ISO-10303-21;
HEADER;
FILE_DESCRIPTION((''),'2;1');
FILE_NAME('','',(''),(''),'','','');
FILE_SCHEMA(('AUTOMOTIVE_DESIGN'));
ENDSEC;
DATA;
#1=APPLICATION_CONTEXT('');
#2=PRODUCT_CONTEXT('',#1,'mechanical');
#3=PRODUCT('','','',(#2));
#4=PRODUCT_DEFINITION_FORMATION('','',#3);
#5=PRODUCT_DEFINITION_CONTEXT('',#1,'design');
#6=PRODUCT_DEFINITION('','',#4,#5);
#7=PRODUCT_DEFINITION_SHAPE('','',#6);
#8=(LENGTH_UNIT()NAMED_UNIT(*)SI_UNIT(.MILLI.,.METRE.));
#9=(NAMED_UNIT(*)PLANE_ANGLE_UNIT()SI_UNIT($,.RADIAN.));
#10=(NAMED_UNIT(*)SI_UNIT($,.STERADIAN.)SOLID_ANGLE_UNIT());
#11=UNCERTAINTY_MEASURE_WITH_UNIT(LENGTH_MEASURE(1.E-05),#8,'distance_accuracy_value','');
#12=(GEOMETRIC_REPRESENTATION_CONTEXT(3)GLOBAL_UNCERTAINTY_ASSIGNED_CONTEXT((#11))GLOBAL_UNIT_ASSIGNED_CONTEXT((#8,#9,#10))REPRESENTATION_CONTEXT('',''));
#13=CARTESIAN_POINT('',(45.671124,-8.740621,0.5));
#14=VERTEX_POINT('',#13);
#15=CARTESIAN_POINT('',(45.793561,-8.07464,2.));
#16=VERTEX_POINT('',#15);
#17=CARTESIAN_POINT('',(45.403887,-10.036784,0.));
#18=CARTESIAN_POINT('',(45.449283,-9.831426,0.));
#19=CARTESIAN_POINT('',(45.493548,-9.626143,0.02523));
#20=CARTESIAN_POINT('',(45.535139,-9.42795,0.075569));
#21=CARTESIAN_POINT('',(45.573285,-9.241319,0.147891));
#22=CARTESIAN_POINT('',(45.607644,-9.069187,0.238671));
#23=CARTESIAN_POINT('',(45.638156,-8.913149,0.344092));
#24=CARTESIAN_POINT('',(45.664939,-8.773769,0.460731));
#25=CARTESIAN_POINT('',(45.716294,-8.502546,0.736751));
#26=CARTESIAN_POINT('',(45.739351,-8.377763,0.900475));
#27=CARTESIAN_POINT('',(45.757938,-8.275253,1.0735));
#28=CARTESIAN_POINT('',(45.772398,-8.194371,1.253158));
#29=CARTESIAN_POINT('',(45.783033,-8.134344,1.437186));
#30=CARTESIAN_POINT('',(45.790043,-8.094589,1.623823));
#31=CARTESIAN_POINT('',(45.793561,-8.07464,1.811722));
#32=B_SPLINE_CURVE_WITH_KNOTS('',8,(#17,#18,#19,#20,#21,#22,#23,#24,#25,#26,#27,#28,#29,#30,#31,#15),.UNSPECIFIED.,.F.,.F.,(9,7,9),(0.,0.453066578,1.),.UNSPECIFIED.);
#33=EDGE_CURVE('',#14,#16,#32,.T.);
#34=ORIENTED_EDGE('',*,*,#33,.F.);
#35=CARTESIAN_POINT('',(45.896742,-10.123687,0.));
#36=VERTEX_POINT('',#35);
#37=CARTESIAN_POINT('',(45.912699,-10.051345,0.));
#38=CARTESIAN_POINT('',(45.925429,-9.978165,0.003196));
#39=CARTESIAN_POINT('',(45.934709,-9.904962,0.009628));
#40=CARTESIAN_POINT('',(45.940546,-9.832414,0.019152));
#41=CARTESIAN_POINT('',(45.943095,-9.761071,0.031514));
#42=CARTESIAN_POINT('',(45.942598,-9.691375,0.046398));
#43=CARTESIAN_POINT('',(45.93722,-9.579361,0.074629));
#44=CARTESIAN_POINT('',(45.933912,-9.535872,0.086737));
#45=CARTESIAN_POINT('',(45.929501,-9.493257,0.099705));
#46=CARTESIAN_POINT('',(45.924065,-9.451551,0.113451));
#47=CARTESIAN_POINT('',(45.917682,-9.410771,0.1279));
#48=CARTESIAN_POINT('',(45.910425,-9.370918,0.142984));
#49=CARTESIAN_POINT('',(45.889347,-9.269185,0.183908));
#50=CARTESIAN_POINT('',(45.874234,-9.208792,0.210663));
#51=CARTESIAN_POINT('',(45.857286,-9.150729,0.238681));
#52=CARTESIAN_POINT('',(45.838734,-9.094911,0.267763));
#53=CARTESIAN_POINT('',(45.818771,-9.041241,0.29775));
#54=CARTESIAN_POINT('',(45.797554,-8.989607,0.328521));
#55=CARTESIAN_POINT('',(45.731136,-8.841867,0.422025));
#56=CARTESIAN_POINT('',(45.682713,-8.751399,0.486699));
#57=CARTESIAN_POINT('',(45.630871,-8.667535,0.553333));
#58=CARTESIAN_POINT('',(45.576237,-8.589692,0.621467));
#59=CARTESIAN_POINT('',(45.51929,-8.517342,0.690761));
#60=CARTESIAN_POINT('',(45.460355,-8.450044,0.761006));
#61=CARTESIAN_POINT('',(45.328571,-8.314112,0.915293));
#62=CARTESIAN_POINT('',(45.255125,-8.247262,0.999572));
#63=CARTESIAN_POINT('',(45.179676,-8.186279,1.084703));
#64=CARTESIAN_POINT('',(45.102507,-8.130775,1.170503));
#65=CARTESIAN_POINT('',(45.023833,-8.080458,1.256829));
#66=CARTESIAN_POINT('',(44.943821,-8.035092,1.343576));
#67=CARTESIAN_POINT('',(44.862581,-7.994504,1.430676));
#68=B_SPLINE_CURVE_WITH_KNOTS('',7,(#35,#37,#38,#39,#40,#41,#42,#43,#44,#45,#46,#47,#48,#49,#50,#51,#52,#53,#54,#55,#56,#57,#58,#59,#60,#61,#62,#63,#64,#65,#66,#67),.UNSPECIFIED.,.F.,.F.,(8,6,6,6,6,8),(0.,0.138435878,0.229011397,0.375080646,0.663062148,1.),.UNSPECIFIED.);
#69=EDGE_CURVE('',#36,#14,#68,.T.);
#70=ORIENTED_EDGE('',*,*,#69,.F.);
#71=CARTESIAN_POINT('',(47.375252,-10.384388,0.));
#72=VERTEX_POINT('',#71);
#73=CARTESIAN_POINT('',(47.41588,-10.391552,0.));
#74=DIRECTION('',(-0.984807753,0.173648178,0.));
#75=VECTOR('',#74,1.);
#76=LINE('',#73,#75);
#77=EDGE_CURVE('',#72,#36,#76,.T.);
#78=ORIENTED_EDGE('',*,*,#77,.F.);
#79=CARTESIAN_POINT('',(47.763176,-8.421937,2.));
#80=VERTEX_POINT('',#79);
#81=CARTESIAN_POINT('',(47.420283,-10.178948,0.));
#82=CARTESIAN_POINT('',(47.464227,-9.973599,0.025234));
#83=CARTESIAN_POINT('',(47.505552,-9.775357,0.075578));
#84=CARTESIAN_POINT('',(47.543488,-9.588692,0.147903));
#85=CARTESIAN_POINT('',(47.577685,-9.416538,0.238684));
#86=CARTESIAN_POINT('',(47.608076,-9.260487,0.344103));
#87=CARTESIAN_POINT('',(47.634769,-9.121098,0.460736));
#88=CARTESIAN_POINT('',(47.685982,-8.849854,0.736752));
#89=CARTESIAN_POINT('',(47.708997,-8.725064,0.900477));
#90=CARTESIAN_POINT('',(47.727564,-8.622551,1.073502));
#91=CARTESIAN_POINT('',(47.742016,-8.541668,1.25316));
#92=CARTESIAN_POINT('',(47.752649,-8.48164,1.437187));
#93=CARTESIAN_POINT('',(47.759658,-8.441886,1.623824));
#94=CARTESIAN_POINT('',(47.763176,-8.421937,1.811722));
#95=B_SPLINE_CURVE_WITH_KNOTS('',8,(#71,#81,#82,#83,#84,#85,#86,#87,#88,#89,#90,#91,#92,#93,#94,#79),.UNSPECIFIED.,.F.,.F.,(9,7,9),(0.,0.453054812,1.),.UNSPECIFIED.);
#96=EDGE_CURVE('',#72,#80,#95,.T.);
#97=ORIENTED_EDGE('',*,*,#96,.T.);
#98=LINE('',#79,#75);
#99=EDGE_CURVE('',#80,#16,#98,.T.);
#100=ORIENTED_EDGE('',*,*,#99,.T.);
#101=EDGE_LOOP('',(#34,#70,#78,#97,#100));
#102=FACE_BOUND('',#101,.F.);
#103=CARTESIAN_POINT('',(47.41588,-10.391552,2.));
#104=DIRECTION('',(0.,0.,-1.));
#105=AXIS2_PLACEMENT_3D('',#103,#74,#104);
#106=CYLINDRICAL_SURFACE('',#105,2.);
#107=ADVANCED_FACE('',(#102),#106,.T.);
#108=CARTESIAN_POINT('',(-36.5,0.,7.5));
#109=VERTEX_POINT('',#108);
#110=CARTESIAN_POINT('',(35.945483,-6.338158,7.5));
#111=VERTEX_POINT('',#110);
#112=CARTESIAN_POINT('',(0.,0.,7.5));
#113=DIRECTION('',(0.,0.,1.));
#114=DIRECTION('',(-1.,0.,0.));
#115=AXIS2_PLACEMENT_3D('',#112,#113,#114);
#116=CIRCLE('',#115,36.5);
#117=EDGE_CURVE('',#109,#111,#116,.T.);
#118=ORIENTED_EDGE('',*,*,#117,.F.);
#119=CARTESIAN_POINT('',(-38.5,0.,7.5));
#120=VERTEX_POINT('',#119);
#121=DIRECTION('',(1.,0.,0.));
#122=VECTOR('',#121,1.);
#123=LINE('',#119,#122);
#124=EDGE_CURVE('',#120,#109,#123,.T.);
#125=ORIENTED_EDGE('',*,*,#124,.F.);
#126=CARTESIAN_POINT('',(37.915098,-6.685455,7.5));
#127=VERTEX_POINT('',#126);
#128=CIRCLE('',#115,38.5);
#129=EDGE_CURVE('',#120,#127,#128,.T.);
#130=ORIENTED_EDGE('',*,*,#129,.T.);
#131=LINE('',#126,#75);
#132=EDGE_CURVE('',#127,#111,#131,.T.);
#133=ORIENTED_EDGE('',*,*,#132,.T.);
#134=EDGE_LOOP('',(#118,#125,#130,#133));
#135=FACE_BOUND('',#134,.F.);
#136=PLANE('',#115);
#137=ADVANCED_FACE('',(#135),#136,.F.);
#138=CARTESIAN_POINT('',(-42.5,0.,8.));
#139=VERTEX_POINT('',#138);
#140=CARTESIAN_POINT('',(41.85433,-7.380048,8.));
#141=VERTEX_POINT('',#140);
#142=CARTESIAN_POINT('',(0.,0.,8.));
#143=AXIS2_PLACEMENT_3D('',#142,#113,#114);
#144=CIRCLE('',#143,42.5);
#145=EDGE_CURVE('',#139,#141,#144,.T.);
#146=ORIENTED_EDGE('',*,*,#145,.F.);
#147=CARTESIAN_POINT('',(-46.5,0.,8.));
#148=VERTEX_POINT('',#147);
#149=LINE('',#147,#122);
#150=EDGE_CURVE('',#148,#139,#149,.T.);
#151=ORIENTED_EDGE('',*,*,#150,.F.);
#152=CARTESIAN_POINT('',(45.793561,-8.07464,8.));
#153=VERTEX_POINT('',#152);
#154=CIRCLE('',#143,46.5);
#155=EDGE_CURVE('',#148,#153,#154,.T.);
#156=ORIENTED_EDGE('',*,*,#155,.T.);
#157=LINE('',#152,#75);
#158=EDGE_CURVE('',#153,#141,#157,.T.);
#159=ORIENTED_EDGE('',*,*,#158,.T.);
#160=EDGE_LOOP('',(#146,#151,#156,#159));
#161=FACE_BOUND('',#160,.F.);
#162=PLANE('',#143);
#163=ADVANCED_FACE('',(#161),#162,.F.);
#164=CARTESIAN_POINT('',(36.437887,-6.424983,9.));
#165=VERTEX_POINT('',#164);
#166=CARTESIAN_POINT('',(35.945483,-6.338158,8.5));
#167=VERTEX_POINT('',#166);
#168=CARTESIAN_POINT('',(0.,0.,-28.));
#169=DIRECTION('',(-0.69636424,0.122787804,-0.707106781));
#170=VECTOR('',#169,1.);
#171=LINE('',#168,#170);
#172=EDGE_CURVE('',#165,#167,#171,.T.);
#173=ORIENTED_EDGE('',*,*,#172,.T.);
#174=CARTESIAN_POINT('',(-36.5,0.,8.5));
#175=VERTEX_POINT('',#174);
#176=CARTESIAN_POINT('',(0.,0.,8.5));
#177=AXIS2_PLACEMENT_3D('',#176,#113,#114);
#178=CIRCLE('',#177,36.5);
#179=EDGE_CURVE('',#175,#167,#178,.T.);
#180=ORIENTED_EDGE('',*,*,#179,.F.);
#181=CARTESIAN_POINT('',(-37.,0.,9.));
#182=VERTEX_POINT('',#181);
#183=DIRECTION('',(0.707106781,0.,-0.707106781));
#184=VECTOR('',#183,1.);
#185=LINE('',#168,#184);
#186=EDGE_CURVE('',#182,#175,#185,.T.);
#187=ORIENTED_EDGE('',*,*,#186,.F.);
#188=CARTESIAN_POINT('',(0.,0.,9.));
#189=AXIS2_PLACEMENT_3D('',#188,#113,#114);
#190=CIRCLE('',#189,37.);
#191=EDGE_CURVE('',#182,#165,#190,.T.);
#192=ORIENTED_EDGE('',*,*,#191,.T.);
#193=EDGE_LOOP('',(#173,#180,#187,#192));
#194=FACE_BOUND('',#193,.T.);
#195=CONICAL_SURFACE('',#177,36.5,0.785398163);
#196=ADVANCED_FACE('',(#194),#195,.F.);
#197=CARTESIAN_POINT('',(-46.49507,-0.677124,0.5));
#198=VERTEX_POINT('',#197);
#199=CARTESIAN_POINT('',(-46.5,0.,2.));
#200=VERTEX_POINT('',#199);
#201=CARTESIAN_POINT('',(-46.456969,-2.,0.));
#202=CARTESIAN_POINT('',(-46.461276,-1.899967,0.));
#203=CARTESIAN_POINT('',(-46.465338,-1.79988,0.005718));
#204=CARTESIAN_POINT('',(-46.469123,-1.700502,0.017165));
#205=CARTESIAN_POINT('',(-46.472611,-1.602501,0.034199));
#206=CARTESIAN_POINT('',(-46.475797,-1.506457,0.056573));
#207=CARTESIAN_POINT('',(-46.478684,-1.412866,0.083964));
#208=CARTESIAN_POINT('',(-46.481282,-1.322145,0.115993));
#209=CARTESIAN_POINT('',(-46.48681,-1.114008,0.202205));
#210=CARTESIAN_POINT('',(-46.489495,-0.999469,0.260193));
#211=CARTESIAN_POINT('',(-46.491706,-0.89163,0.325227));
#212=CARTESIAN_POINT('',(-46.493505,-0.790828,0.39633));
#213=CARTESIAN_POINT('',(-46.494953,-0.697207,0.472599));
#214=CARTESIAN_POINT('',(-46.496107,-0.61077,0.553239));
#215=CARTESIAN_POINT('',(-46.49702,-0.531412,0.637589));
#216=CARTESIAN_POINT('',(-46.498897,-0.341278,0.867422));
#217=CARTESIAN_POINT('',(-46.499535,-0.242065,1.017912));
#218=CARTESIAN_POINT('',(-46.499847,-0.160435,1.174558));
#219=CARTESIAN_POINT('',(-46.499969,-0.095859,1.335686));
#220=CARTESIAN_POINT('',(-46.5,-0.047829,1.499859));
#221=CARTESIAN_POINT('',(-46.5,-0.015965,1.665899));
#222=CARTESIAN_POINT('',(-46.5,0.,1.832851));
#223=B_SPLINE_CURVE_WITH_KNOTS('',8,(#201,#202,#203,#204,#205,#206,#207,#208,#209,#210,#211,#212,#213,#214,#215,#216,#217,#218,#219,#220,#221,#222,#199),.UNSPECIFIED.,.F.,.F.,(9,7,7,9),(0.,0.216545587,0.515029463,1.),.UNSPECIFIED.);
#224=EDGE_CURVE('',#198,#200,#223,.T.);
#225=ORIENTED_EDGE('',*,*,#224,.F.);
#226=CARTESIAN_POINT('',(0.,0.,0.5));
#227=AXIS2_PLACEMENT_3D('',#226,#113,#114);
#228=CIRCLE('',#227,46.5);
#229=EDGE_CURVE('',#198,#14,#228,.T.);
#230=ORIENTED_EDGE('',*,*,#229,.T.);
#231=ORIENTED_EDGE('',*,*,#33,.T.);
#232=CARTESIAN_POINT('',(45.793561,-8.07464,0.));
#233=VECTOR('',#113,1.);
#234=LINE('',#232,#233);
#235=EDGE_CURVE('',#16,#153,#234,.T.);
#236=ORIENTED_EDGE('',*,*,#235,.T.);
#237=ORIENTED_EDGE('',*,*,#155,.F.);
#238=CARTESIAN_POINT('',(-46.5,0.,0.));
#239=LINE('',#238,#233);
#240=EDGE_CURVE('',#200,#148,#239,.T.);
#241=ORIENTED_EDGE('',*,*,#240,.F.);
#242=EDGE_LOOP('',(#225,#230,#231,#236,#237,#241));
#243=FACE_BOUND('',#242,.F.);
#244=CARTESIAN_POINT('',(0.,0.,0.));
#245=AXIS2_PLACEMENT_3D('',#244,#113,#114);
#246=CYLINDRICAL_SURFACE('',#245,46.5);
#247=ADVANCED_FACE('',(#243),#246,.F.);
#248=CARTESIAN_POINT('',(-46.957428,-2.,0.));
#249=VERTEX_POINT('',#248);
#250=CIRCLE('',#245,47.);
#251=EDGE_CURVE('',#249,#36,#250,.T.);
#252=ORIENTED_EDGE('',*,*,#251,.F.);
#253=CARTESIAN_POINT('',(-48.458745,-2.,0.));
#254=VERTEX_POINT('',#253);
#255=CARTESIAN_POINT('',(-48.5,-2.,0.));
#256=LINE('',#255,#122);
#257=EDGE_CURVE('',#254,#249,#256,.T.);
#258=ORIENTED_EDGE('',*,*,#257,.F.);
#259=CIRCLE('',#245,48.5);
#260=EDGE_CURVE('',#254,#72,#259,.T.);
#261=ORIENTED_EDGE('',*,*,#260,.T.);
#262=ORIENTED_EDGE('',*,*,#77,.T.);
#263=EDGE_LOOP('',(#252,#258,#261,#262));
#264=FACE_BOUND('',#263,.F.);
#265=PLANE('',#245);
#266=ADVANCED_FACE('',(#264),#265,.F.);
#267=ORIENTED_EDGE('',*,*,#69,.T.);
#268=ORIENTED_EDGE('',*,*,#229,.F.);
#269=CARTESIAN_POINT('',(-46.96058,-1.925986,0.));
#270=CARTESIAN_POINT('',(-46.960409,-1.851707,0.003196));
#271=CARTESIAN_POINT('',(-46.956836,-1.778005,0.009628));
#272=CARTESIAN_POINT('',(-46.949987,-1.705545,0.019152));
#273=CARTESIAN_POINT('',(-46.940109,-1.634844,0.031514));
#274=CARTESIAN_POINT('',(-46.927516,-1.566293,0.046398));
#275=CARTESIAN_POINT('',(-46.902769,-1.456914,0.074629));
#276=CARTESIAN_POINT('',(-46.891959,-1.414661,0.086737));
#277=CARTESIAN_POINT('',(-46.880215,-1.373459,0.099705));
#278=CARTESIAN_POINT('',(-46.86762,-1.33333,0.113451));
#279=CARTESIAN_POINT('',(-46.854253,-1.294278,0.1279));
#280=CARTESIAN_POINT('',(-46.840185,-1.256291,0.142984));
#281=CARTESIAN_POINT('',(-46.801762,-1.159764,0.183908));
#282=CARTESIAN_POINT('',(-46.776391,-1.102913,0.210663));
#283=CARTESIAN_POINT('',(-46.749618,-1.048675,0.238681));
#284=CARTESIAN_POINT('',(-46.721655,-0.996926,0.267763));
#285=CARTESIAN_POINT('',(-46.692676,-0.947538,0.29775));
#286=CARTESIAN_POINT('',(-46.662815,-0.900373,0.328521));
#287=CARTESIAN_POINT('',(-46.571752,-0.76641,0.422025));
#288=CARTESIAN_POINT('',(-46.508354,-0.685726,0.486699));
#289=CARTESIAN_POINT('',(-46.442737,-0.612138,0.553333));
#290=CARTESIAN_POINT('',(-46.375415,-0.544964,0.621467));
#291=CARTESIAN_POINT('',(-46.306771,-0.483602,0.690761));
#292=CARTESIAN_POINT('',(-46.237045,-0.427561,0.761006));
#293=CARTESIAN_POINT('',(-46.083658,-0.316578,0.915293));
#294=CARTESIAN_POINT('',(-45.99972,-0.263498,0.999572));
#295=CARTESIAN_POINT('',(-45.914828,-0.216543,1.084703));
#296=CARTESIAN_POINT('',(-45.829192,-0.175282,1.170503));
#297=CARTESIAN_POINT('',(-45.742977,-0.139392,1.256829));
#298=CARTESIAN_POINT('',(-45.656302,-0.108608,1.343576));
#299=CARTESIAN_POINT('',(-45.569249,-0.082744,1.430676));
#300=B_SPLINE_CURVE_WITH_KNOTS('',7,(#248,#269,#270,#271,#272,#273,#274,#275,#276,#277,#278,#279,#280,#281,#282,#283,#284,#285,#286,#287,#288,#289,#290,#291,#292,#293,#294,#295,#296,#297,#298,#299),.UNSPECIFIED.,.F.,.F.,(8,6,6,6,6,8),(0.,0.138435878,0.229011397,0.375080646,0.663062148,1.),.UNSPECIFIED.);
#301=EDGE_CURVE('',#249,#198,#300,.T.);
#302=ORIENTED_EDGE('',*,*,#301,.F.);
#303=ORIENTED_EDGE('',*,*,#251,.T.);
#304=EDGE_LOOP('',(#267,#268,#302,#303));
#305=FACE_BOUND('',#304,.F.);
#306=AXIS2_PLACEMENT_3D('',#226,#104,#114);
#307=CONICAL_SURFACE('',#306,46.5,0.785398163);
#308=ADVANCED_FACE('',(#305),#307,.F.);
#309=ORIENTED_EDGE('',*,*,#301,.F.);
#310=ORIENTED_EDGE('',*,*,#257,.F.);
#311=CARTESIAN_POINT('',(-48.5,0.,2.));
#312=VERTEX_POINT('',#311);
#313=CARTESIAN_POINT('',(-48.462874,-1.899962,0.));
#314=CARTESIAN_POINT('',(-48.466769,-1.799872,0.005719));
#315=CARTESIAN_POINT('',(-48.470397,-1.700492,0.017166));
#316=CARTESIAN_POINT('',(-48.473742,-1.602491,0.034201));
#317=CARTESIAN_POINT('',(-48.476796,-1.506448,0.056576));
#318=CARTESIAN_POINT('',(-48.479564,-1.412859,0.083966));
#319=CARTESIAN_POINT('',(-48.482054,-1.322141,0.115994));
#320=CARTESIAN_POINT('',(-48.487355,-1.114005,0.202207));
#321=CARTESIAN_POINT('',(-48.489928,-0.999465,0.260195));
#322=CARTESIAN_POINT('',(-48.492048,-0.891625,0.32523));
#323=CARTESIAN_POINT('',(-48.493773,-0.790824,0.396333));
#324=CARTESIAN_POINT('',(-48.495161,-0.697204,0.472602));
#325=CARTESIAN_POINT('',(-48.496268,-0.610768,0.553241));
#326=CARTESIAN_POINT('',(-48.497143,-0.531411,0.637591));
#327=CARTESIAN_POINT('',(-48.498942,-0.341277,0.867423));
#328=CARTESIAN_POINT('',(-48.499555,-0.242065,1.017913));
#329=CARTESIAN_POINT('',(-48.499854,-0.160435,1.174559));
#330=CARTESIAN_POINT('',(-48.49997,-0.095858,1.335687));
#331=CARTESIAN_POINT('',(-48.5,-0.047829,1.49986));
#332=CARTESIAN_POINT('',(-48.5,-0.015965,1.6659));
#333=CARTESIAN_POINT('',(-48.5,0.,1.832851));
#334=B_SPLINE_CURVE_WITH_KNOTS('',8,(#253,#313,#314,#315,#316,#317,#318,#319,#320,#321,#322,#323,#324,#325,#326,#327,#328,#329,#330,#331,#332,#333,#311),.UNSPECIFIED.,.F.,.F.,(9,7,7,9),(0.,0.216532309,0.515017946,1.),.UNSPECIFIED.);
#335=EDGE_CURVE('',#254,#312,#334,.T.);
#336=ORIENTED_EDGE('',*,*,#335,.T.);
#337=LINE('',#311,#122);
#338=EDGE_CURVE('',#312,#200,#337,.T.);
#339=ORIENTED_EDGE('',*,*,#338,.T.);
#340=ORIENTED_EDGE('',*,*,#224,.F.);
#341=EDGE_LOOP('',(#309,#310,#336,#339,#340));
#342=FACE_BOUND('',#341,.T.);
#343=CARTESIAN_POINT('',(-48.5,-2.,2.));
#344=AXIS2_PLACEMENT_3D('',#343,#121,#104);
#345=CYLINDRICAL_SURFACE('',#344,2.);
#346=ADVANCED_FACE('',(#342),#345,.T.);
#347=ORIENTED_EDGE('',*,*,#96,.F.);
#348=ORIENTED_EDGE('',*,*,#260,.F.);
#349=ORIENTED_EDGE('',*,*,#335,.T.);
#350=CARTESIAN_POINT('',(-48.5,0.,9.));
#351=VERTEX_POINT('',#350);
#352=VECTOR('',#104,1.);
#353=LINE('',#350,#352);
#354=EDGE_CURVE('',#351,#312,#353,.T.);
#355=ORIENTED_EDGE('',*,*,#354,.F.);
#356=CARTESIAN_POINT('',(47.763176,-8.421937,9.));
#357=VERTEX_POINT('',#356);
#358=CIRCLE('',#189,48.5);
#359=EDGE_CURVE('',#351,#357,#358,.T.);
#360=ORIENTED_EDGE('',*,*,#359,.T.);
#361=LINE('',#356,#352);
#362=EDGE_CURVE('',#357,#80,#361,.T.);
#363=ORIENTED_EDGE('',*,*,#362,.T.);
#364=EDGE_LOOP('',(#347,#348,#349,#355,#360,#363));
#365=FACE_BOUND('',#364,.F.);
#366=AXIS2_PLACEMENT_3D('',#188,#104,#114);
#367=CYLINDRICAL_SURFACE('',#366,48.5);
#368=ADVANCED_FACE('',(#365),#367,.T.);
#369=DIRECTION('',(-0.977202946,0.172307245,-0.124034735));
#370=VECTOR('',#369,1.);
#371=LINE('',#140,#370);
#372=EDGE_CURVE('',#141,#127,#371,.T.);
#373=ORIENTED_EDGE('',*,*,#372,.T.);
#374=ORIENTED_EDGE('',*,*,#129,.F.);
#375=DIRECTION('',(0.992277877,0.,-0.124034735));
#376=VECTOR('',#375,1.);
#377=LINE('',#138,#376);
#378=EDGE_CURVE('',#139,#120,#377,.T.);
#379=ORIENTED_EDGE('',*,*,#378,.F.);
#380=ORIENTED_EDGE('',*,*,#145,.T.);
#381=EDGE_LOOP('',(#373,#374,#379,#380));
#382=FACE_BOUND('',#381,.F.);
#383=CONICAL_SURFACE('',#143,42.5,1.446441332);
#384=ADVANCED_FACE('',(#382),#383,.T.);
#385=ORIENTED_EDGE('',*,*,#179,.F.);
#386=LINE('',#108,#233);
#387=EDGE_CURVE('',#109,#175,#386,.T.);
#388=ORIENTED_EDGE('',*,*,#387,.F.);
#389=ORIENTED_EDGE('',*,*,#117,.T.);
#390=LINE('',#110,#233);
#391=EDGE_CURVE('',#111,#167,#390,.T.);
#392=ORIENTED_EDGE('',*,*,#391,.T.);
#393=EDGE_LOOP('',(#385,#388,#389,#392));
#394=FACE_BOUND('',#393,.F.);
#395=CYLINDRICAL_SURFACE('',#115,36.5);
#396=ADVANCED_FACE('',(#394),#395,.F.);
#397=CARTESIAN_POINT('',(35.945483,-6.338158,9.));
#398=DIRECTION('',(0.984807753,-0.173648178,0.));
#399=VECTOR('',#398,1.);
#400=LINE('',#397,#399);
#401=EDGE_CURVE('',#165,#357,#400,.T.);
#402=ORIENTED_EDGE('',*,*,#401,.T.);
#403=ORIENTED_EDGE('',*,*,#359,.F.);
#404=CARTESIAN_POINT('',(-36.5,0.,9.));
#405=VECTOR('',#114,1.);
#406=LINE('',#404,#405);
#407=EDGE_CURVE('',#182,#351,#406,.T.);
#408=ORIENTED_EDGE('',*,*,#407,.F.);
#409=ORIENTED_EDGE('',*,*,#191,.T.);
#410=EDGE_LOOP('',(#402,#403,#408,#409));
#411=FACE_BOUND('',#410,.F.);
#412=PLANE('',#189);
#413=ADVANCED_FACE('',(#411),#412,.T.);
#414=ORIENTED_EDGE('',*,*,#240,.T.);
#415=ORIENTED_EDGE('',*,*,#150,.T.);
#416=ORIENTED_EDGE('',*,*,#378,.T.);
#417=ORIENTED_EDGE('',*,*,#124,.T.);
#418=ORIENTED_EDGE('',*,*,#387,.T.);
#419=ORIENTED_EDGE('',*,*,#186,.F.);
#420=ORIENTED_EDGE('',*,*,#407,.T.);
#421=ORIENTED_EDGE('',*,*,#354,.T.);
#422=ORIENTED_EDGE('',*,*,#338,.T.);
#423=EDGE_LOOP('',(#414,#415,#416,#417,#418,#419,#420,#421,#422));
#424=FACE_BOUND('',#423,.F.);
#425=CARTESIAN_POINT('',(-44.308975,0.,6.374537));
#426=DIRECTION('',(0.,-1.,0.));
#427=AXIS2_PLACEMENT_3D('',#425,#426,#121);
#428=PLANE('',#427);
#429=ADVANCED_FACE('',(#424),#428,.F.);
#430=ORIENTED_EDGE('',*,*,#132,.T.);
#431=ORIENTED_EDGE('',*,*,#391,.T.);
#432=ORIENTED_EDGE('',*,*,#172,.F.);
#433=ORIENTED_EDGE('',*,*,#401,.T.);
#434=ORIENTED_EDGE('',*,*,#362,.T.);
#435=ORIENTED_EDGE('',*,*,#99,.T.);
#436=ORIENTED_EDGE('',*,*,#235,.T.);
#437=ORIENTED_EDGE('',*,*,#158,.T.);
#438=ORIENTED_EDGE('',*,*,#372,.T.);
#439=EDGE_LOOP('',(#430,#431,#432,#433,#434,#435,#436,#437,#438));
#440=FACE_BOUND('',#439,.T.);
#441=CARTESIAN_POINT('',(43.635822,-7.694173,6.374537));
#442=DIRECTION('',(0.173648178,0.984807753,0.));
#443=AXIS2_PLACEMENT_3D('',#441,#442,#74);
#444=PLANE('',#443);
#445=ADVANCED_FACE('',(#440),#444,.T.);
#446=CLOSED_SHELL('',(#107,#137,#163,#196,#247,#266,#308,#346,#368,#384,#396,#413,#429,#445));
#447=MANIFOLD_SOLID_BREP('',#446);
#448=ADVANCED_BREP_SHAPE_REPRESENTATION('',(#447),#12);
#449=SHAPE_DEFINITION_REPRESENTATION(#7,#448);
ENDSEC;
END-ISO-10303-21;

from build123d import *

# Parameters (mm, degrees)
F1_ANGLE = 170
F2_SIZE  = 0.5
F3_R     = 2
F4_SIZE  = 0.5


# Not quite as in the source:
# - a feature names something its author has since deleted; it is built from what else it names


with BuildPart() as f1:
    # F0 (on Front) → F1 (revolve)
    with BuildSketch(Plane.XZ):
        Polygon((-48.5, 9), (-48.5, 0), (-46.5, 0), (-46.5, 8), (-42.5, 8), (-38.5, 7.5), (-36.5, 7.5), (-36.5, 9), align=None)
    revolve(axis=Axis((0, 0, 4.2486875318), (0, 0, 1)), revolution_arc=F1_ANGLE)

    # F2
    f2_edges = [f1.edges().sort_by_distance(p)[0] for p in [
        (-4.052742, -46.323053, 0),
    ]]
    chamfer(f2_edges, length=F2_SIZE)

    # F3
    f3_edges = [f1.edges().sort_by_distance(p)[0] for p in [
        (47.02457, -8.2917, 0),
        (-47.75, 0, 0),
    ]]
    fillet(f3_edges, radius=F3_R)

    # F4
    f4_edges = [f1.edges().sort_by_distance(p)[0] for p in [
        (-3.181185, -36.361106, 9),
    ]]
    chamfer(f4_edges, length=F4_SIZE)


solid = f1.part
